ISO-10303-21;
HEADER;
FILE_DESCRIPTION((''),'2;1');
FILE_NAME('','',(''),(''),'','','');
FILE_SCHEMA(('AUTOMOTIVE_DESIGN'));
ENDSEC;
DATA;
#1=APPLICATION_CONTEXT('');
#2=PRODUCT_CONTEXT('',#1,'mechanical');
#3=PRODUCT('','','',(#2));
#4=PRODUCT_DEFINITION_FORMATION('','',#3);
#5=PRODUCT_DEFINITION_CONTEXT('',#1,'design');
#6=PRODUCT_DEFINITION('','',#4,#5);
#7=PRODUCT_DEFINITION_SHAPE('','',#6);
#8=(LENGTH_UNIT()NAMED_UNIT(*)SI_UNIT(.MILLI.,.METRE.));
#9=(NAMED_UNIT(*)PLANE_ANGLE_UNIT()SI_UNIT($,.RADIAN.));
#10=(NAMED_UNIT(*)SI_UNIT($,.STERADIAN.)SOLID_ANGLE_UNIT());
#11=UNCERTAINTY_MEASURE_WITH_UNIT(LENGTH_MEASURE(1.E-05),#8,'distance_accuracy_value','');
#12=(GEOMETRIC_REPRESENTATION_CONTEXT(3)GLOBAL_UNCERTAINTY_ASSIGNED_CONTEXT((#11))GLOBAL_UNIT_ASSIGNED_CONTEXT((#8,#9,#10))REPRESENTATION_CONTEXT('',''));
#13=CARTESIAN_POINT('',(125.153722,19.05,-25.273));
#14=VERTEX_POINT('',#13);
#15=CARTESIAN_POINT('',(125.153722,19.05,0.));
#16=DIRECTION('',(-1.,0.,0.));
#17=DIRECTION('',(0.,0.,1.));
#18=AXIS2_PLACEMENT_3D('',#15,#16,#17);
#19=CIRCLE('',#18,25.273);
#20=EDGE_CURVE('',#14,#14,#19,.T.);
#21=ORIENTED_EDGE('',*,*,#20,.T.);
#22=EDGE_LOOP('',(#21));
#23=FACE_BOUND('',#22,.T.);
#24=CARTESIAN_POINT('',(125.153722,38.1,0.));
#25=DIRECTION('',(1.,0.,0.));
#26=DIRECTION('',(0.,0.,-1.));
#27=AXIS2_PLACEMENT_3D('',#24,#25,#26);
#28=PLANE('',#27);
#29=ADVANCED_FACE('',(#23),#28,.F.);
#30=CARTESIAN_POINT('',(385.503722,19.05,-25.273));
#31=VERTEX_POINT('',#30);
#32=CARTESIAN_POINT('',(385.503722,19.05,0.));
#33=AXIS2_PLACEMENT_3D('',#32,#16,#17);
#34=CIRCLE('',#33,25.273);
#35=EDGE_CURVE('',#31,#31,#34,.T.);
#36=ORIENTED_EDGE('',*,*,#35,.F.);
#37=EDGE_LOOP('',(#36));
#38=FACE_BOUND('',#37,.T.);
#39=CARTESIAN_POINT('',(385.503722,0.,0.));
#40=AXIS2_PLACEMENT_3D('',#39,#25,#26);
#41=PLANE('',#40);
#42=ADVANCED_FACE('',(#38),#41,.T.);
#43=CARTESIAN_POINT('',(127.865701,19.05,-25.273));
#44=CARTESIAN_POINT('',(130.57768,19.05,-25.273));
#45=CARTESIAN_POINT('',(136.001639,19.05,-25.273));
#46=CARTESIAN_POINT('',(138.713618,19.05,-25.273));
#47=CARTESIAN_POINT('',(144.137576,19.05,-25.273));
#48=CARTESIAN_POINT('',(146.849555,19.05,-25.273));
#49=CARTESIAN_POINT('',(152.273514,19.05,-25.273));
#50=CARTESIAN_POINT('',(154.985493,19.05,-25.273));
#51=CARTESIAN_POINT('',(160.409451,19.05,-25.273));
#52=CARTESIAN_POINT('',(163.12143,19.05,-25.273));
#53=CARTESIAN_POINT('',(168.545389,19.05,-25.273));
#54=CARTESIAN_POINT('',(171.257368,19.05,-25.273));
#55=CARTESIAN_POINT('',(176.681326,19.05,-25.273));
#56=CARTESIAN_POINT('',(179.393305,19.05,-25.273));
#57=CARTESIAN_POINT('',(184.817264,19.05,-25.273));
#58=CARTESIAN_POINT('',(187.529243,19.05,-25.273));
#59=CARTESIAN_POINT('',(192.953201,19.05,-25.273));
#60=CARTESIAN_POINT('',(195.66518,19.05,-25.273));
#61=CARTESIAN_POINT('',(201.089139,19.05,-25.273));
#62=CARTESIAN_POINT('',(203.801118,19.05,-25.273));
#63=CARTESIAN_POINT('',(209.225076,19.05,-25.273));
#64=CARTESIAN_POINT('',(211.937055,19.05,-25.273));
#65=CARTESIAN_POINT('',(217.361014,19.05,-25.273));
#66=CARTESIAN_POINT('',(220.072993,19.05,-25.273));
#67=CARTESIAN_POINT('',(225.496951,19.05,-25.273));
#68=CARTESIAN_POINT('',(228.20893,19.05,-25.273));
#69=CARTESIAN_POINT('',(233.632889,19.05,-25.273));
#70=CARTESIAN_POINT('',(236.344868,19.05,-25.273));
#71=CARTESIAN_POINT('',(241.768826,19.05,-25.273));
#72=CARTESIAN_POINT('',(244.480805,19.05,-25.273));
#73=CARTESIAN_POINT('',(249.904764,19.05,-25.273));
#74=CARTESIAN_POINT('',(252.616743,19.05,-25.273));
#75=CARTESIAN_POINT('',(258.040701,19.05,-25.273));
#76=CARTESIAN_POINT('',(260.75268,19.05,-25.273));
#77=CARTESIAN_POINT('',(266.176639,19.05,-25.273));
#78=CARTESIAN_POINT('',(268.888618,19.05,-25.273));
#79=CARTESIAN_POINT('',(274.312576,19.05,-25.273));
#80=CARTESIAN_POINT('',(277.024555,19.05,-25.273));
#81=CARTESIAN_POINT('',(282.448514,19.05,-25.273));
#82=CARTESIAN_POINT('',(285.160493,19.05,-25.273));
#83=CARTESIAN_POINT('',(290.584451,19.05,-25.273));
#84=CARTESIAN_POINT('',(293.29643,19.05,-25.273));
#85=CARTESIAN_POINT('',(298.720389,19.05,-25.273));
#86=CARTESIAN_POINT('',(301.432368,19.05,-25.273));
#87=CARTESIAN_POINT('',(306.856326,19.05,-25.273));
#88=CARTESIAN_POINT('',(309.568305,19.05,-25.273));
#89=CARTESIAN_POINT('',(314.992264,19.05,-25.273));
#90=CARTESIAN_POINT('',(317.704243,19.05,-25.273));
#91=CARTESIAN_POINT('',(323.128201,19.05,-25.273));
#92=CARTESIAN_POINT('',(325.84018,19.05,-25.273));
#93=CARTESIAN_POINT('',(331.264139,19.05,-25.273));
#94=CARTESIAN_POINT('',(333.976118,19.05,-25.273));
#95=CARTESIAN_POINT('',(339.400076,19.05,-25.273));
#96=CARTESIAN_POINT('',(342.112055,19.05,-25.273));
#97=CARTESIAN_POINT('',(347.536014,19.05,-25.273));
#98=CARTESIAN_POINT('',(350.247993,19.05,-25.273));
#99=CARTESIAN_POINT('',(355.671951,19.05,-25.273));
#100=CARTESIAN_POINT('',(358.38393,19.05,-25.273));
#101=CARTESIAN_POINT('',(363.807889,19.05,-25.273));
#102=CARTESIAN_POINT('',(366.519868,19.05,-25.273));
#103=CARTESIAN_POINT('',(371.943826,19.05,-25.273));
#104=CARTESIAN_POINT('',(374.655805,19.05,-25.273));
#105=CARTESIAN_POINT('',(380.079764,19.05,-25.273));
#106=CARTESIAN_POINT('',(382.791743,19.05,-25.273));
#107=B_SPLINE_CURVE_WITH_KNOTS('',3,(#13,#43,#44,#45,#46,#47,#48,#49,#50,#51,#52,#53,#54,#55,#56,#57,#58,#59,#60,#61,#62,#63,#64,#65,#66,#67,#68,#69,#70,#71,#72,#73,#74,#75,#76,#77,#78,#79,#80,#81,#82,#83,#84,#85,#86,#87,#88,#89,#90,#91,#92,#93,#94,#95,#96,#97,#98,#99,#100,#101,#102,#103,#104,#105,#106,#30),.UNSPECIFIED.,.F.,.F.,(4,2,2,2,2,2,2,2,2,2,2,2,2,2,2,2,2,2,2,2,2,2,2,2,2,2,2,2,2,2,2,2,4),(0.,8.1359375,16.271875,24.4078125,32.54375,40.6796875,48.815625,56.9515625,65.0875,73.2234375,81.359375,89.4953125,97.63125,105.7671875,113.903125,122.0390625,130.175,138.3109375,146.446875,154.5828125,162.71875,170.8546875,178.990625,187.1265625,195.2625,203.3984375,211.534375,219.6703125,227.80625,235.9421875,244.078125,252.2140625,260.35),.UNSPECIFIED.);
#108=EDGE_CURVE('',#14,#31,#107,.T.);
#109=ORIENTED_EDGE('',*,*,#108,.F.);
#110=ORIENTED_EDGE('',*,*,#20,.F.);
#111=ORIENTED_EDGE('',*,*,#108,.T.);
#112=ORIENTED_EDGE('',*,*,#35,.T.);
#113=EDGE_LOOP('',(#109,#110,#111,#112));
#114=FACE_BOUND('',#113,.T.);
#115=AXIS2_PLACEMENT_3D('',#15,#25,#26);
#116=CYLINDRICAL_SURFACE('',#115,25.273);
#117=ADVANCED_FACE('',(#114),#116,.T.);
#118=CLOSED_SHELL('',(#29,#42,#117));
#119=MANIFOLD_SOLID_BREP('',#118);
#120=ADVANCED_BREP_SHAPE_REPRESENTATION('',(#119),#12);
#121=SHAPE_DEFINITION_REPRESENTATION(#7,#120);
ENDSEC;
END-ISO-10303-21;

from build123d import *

# Parameters (mm, degrees)
SKETCH1_W               = 396.24
SKETCH1_H               = 19.05
CUT_EXTRUDE1_DEPTH      = 101.6
CUT_EXTRUDE1_DEPTH_BACK = 69.088
F_3DSKETCH2_R           = 25.273
BOSS_EXTRUDE1_DEPTH     = 260.35


with BuildPart() as part:
    # Sketch1 → Revolve1 (revolve)
    with BuildSketch(Plane.XY):
        with Locations((178.556917264, 9.525)):
            Rectangle(SKETCH1_W, SKETCH1_H)
    revolve(axis=Axis((-62.064477949, 19.05, 0), (1, 0, 0)))

    # 3DSketch1 → Cut-Extrude1 (cut, two sides: drawn at the far end of the back side and taken through both)
    with BuildSketch(Plane(origin=(125.15372202, 38.1, 0), x_dir=(-0.9587579392690639, -0.2842238798703196, 0), z_dir=(0, 0, -1)).offset(-CUT_EXTRUDE1_DEPTH_BACK)):
        Polygon((0, 0), (12.838737839, -43.308260512), (158.928287458, 0), (141.370884548, 59.225493089), (-6.410822017, 15.415592494), align=None)
    extrude(amount=CUT_EXTRUDE1_DEPTH + CUT_EXTRUDE1_DEPTH_BACK, mode=Mode.SUBTRACT)

    # 3DSketch2 → Boss-Extrude1 (add)
    with BuildSketch(Plane(origin=(125.15372202, 19.05, 0), x_dir=(0, 0, 1), z_dir=(1, 0, 0))):
        Circle(F_3DSKETCH2_R)
    extrude(amount=BOSS_EXTRUDE1_DEPTH)


solid = part.part
